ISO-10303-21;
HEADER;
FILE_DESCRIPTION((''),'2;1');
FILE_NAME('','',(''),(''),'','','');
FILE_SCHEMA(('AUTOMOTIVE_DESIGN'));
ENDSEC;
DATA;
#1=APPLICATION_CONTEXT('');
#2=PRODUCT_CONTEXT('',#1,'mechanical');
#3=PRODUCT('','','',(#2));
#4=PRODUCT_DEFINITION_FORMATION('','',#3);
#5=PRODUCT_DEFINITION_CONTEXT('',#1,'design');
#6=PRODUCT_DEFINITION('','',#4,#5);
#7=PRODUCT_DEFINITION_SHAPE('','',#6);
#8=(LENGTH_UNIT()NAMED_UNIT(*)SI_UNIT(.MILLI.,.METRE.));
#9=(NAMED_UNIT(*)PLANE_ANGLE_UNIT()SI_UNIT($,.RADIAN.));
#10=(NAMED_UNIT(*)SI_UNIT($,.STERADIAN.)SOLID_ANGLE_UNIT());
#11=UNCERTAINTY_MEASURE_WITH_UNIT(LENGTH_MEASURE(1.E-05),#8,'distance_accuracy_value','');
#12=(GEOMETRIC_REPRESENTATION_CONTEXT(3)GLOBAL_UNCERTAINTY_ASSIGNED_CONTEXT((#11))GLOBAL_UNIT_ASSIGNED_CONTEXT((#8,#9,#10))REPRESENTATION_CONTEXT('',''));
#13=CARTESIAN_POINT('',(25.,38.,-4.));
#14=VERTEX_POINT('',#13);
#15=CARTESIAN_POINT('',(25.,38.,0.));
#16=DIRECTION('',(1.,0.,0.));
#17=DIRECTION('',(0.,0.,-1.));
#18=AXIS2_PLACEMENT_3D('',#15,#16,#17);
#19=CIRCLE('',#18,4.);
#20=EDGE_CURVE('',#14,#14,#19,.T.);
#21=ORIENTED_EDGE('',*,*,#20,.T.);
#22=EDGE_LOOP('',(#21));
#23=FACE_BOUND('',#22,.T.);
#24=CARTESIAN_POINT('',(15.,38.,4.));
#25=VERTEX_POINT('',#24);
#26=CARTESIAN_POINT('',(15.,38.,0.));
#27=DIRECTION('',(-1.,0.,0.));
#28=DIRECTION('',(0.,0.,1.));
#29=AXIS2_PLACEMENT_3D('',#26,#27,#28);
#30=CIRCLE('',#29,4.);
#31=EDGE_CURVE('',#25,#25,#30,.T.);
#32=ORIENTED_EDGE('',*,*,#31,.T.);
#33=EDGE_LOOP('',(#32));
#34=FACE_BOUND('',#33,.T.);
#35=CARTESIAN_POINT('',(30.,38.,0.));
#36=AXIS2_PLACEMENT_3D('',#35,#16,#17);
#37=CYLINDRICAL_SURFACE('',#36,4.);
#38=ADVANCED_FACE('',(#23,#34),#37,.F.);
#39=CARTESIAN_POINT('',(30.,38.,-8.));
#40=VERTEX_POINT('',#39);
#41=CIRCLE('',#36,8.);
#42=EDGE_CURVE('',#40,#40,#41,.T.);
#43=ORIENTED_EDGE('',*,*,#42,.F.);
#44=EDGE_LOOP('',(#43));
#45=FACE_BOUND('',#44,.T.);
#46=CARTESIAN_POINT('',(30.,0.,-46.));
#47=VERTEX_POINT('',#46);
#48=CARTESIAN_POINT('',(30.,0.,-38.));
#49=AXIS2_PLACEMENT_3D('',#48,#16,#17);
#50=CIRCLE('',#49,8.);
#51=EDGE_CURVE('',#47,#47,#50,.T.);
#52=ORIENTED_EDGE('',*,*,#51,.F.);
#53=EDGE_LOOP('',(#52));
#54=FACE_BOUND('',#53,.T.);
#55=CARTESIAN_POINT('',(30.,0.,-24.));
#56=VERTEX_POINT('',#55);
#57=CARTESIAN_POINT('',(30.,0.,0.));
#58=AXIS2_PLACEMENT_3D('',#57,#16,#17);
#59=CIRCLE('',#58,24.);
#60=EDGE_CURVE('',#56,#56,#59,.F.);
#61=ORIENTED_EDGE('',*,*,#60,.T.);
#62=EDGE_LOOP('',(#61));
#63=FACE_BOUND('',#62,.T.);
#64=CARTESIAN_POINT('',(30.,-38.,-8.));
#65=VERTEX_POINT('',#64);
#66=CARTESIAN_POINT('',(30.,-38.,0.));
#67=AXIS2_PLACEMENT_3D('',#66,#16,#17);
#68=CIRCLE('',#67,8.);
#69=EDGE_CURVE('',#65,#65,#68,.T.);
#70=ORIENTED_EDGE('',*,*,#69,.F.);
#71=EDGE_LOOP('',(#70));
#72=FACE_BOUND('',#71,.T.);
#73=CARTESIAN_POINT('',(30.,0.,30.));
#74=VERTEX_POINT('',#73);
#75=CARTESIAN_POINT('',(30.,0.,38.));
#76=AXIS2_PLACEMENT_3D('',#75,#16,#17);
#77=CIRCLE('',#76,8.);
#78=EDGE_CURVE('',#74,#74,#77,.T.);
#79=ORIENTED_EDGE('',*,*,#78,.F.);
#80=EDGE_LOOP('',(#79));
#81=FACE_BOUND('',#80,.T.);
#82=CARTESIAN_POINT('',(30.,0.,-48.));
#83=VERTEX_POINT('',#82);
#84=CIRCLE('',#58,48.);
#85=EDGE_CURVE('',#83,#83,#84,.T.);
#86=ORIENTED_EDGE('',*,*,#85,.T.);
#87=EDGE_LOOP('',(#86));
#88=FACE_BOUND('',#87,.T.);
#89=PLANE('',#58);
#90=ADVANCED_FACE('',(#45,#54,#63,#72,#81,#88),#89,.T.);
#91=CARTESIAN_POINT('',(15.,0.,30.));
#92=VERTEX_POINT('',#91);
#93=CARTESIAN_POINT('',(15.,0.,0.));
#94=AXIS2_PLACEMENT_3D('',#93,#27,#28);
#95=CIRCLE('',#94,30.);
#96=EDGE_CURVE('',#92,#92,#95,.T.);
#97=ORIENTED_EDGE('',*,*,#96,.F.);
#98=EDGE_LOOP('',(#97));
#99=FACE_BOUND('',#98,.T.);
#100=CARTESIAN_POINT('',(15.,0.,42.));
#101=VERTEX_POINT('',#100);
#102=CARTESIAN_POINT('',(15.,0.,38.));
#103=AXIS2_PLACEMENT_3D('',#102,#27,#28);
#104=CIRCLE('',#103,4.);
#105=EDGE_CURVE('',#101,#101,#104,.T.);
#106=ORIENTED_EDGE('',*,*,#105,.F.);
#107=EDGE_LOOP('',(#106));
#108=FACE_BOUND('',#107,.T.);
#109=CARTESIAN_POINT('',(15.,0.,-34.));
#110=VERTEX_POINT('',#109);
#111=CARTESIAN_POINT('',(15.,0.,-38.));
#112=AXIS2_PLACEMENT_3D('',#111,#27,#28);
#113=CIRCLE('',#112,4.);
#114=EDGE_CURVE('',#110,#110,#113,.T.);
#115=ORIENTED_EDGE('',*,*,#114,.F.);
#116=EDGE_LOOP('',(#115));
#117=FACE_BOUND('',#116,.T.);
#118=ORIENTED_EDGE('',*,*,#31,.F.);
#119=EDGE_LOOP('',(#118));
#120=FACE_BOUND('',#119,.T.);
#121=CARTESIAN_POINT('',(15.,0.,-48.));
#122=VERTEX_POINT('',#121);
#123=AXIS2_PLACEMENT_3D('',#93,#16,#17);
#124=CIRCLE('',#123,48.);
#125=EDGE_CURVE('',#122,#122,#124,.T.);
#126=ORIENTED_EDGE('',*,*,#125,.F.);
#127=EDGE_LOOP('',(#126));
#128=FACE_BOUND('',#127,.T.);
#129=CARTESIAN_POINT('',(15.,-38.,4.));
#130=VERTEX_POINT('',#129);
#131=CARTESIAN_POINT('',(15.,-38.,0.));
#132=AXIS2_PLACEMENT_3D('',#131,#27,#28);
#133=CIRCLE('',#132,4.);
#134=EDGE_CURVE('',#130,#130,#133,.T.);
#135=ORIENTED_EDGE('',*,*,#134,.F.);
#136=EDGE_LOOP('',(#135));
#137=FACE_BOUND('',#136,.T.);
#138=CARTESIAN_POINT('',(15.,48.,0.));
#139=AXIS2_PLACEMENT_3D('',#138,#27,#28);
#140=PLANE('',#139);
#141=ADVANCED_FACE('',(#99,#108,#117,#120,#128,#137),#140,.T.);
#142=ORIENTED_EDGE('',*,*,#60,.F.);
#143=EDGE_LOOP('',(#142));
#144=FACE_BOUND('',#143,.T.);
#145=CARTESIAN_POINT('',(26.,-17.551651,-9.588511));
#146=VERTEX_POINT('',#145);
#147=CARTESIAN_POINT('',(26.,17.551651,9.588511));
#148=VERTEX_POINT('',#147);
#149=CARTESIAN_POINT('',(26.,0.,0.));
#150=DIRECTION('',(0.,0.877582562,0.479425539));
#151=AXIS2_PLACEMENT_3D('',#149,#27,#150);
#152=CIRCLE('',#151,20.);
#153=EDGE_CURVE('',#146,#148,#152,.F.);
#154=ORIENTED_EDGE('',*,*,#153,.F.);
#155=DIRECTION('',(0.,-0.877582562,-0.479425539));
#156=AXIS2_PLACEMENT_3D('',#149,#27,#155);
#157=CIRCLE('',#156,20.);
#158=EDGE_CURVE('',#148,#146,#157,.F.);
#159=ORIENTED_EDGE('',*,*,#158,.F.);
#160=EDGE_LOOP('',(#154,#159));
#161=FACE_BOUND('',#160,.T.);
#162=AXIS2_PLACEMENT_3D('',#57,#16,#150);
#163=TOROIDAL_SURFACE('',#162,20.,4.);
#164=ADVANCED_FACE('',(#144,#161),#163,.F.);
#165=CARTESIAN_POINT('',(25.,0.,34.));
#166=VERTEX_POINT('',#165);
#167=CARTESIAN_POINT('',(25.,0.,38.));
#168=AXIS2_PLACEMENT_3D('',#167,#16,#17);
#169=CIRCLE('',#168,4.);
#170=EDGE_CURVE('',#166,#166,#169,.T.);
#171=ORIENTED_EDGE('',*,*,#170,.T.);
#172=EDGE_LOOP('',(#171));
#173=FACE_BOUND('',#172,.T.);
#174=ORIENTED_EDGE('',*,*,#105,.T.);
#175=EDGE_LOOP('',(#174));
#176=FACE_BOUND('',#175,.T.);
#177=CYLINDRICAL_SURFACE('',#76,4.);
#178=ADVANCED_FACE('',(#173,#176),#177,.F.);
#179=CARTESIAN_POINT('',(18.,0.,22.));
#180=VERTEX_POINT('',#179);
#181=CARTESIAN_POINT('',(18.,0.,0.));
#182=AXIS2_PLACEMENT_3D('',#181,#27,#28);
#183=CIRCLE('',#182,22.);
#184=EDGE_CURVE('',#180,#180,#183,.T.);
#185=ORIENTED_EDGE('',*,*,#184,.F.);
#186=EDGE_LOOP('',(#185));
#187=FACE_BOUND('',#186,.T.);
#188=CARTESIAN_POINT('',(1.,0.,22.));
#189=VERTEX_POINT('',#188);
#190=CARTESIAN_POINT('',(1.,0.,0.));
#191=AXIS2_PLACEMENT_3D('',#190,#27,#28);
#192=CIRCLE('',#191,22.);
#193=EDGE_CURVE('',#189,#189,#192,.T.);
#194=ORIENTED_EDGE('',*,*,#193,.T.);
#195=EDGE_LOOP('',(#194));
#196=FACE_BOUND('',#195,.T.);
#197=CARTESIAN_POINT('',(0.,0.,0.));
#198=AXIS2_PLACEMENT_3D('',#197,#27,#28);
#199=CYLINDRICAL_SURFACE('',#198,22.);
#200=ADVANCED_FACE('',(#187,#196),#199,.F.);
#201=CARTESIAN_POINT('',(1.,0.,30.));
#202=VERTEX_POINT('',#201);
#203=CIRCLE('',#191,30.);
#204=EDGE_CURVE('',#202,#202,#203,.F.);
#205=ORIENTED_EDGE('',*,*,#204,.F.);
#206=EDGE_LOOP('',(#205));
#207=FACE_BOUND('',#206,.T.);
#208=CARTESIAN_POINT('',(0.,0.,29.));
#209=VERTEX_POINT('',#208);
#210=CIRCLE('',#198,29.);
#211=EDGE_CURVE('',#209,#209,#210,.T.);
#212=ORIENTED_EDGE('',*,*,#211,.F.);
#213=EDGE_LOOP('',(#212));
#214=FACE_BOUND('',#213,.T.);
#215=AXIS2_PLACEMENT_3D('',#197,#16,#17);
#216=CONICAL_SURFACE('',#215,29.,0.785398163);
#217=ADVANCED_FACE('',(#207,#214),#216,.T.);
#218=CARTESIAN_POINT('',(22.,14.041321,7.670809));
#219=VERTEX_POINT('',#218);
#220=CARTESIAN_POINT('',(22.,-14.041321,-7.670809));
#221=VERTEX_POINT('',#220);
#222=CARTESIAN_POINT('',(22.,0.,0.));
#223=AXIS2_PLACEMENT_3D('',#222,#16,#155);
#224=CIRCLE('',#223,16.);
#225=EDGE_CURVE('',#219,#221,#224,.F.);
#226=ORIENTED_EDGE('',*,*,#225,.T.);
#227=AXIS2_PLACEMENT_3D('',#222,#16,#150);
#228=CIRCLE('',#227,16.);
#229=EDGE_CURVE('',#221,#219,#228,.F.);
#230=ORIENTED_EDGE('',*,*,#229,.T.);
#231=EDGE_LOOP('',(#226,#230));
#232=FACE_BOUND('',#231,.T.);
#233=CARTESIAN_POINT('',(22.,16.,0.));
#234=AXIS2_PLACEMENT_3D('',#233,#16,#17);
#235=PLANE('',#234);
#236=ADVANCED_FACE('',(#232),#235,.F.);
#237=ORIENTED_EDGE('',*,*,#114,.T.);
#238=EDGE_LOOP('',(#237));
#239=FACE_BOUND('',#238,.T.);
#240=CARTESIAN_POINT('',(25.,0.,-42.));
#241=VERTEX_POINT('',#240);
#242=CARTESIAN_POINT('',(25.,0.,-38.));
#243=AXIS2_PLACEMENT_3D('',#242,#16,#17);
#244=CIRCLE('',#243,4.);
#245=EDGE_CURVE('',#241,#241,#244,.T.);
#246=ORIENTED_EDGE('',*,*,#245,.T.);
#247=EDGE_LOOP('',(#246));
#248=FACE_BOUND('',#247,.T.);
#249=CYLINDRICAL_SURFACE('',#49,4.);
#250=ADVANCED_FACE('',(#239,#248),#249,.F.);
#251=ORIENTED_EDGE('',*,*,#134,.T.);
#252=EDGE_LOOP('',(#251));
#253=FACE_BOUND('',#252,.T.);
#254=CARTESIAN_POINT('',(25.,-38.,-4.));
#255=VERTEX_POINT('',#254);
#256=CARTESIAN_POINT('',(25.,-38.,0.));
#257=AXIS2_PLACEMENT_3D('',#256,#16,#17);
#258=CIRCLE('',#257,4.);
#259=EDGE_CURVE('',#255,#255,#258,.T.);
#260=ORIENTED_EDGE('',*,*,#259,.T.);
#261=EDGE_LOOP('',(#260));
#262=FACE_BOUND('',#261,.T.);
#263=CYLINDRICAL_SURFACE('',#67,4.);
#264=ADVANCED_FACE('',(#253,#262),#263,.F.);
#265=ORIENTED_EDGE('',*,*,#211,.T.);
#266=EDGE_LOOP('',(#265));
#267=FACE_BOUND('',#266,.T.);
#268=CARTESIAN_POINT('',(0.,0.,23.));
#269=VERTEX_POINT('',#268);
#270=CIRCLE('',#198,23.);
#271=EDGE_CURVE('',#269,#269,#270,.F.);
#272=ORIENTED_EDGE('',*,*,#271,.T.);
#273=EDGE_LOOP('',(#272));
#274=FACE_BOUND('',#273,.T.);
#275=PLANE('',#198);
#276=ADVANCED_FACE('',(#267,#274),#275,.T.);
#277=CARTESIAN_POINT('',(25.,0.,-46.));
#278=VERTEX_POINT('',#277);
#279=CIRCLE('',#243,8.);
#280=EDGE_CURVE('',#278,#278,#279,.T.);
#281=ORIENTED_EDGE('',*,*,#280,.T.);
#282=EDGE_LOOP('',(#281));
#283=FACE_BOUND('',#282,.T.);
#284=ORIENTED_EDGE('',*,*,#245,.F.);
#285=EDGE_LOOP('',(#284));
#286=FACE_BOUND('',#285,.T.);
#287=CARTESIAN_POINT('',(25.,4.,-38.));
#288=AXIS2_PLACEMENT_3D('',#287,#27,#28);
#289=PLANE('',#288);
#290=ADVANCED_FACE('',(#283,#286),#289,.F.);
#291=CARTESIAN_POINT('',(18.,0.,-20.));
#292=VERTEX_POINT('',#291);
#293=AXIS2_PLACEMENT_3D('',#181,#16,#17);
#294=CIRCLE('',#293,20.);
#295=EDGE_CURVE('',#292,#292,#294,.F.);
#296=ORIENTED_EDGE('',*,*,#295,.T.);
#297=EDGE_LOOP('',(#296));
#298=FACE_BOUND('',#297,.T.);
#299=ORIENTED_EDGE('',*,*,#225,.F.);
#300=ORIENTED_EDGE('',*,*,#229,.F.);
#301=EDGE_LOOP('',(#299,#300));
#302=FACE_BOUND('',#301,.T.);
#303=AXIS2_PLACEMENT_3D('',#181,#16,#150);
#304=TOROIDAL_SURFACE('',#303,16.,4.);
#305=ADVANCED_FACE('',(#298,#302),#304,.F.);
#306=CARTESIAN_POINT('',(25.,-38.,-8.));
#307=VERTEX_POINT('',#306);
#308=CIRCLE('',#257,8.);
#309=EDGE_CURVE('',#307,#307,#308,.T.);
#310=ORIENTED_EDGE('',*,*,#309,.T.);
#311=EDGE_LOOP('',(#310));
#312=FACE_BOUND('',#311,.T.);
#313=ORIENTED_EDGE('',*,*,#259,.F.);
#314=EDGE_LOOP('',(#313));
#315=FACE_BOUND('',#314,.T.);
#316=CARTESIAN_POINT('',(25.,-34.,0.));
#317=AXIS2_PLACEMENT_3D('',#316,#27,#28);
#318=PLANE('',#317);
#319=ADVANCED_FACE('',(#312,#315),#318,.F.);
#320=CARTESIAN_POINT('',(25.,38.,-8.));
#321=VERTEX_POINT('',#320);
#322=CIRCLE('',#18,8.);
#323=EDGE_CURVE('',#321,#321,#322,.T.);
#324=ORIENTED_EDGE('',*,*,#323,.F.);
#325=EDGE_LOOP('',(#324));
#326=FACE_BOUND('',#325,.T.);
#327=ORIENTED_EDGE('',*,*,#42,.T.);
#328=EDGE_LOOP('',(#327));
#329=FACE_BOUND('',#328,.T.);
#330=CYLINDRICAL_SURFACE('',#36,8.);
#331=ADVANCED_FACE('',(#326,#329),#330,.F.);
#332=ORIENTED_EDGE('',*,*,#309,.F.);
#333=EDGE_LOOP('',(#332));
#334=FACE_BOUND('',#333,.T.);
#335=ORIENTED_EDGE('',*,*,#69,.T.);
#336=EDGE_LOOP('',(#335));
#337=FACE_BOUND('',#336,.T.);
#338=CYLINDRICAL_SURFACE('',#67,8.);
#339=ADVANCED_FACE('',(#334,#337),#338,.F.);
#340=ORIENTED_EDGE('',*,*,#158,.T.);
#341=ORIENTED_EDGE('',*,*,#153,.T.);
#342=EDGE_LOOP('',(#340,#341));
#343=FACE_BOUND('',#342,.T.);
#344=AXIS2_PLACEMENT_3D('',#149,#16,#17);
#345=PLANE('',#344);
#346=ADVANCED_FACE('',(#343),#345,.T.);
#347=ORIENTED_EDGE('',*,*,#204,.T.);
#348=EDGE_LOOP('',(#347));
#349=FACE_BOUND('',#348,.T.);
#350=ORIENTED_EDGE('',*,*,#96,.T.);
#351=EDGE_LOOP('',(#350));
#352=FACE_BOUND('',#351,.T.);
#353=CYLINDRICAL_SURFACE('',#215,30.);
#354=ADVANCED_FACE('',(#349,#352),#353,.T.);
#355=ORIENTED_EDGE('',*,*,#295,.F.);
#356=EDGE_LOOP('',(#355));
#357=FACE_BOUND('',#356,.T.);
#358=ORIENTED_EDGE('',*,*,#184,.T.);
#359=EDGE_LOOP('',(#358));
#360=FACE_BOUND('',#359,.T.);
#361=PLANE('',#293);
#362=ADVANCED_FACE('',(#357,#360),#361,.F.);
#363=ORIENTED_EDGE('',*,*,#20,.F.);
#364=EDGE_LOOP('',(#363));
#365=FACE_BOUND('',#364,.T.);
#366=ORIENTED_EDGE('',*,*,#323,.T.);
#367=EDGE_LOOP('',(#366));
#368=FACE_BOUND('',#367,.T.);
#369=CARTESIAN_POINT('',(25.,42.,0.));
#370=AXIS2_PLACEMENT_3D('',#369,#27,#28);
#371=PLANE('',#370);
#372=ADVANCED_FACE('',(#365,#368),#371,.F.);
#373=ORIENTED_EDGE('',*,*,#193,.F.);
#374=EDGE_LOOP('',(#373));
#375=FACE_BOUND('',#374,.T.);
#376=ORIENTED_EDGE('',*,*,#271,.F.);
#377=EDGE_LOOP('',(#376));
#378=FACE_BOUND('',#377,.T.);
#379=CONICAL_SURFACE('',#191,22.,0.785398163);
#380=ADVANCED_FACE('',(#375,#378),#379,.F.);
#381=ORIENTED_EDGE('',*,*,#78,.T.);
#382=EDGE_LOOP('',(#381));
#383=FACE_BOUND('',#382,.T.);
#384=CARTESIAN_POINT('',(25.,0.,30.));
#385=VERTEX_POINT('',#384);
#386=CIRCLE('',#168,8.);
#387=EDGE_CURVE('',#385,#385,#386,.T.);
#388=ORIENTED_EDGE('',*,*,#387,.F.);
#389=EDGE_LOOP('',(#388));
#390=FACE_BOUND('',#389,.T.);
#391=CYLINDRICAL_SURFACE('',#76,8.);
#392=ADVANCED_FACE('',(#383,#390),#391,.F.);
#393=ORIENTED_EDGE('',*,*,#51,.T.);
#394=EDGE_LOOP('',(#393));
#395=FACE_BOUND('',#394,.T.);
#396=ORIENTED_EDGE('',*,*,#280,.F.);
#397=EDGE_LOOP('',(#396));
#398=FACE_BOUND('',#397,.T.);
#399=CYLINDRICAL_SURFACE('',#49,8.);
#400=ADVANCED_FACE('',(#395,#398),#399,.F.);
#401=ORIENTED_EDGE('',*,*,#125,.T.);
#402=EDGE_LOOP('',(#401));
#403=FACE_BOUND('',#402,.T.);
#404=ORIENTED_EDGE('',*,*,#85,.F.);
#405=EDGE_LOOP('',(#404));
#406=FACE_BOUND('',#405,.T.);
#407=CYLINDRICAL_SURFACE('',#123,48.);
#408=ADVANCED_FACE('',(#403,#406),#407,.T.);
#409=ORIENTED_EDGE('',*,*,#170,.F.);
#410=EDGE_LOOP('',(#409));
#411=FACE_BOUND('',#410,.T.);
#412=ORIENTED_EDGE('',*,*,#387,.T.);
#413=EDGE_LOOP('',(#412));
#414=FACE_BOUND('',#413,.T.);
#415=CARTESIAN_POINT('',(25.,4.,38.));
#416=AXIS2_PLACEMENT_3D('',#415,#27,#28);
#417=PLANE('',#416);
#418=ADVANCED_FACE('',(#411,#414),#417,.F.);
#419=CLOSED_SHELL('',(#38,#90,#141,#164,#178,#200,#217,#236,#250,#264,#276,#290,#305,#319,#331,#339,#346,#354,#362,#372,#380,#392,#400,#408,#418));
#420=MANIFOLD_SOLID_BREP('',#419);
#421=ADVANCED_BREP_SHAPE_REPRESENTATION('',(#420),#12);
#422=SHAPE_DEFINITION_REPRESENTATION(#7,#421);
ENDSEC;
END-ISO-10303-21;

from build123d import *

# Parameters (mm, degrees)
ESQUISSE1_W           = 15
ESQUISSE1_H           = 48
ESQUISSE2_R           = 30
EXTRUSION1_DEPTH      = 15
D_GAGEMENT_M391_D     = 44
D_GAGEMENT_M391_DEPTH = 18
PER_AGE1_D            = 8
PER_AGE1_CBORE_D      = 16
PER_AGE1_CBORE_DEPTH  = 5
PER_AGE2_D            = 8
PER_AGE2_CBORE_D      = 16
PER_AGE2_CBORE_DEPTH  = 5
PER_AGE3_D            = 8
PER_AGE3_CBORE_D      = 16
PER_AGE3_CBORE_DEPTH  = 5
PER_AGE4_D            = 8
PER_AGE4_CBORE_D      = 16
PER_AGE4_CBORE_DEPTH  = 5
CHANFREIN1_SIZE       = 1


# Read off the part's stored shape, not the designer's step: Enlèvement de matière-épaissir1, Enlèvement de matière-épaissir2
with BuildPart() as part:
    # Esquisse1 → Révolution1 (revolve)
    with BuildSketch(Plane.XY, mode=Mode.PRIVATE) as r_volution1_sk:
        with Locations((22.5, 24)):
            Rectangle(ESQUISSE1_W, ESQUISSE1_H)
    revolve(r_volution1_sk.sketch.rotate(Axis((15, 0, 0), (1, 0, 0)), 270), axis=Axis((15, 0, 0), (1, 0, 0)))

    # Esquisse2 → Extrusion1 (add)
    with BuildSketch(Plane.ZY.offset(-15)):
        Circle(ESQUISSE2_R)
    extrude(amount=EXTRUSION1_DEPTH)

    # Dégagement M391
    with Locations(Plane.ZY):
        with Locations((0, 0)):
            Hole(D_GAGEMENT_M391_D / 2, depth=D_GAGEMENT_M391_DEPTH)

    # Enlèvement de matière-épaissir1 outline → Enlèvement de matière-épaissir1 (revolve, cut)
    with BuildSketch(Plane.YX):
        with BuildLine():
            Line((0, 18), (20, 18))
            ThreePointArc((20, 18), (18.828427125, 20.828427125), (16, 22))
            Line((16, 22), (0, 22))
            Line((0, 22), (0, 18))
        make_face()
    revolve(axis=Axis((0, 0, 0), (1, 0, 0)), mode=Mode.SUBTRACT)

    # Enlèvement de matière-épaissir2 outline → Enlèvement de matière-épaissir2 (revolve, cut)
    with BuildSketch(Plane.YX):
        with BuildLine():
            Line((0, 26), (20, 26))
            ThreePointArc((20, 26), (22.828427125, 27.171572875), (24, 30))
            Line((24, 30), (0, 30))
            Line((0, 30), (0, 26))
        make_face()
    revolve(axis=Axis((0, 0, 0), (1, 0, 0)), mode=Mode.SUBTRACT)

    # Perçage1 (through all)
    with Locations(Plane(origin=(30, 0, 0), x_dir=(0, 0, -1), z_dir=(1, 0, 0))):
        with Locations((-38, 0)):
            CounterBoreHole(PER_AGE1_D / 2, PER_AGE1_CBORE_D / 2, PER_AGE1_CBORE_DEPTH)

    # Perçage2 (through all)
    with Locations(Plane(origin=(30, 0, 0), x_dir=(0, 0, -1), z_dir=(1, 0, 0))):
        with Locations((0, -38)):
            CounterBoreHole(PER_AGE2_D / 2, PER_AGE2_CBORE_D / 2, PER_AGE2_CBORE_DEPTH)

    # Perçage3 (through all)
    with Locations(Plane(origin=(30, 0, 0), x_dir=(0, 0, -1), z_dir=(1, 0, 0))):
        with Locations((0, 38)):
            CounterBoreHole(PER_AGE3_D / 2, PER_AGE3_CBORE_D / 2, PER_AGE3_CBORE_DEPTH)

    # Perçage4 (through all)
    with Locations(Plane(origin=(30, 0, 0), x_dir=(0, 0, -1), z_dir=(1, 0, 0))):
        with Locations((38, 0)):
            CounterBoreHole(PER_AGE4_D / 2, PER_AGE4_CBORE_D / 2, PER_AGE4_CBORE_DEPTH)

    # Chanfrein1
    chanfrein1_edges = [part.edges().sort_by_distance(p)[0] for p in [
        (0, 0, 22),
        (0, 0, -30),
    ]]
    chamfer(chanfrein1_edges, length=CHANFREIN1_SIZE)


solid = part.part
